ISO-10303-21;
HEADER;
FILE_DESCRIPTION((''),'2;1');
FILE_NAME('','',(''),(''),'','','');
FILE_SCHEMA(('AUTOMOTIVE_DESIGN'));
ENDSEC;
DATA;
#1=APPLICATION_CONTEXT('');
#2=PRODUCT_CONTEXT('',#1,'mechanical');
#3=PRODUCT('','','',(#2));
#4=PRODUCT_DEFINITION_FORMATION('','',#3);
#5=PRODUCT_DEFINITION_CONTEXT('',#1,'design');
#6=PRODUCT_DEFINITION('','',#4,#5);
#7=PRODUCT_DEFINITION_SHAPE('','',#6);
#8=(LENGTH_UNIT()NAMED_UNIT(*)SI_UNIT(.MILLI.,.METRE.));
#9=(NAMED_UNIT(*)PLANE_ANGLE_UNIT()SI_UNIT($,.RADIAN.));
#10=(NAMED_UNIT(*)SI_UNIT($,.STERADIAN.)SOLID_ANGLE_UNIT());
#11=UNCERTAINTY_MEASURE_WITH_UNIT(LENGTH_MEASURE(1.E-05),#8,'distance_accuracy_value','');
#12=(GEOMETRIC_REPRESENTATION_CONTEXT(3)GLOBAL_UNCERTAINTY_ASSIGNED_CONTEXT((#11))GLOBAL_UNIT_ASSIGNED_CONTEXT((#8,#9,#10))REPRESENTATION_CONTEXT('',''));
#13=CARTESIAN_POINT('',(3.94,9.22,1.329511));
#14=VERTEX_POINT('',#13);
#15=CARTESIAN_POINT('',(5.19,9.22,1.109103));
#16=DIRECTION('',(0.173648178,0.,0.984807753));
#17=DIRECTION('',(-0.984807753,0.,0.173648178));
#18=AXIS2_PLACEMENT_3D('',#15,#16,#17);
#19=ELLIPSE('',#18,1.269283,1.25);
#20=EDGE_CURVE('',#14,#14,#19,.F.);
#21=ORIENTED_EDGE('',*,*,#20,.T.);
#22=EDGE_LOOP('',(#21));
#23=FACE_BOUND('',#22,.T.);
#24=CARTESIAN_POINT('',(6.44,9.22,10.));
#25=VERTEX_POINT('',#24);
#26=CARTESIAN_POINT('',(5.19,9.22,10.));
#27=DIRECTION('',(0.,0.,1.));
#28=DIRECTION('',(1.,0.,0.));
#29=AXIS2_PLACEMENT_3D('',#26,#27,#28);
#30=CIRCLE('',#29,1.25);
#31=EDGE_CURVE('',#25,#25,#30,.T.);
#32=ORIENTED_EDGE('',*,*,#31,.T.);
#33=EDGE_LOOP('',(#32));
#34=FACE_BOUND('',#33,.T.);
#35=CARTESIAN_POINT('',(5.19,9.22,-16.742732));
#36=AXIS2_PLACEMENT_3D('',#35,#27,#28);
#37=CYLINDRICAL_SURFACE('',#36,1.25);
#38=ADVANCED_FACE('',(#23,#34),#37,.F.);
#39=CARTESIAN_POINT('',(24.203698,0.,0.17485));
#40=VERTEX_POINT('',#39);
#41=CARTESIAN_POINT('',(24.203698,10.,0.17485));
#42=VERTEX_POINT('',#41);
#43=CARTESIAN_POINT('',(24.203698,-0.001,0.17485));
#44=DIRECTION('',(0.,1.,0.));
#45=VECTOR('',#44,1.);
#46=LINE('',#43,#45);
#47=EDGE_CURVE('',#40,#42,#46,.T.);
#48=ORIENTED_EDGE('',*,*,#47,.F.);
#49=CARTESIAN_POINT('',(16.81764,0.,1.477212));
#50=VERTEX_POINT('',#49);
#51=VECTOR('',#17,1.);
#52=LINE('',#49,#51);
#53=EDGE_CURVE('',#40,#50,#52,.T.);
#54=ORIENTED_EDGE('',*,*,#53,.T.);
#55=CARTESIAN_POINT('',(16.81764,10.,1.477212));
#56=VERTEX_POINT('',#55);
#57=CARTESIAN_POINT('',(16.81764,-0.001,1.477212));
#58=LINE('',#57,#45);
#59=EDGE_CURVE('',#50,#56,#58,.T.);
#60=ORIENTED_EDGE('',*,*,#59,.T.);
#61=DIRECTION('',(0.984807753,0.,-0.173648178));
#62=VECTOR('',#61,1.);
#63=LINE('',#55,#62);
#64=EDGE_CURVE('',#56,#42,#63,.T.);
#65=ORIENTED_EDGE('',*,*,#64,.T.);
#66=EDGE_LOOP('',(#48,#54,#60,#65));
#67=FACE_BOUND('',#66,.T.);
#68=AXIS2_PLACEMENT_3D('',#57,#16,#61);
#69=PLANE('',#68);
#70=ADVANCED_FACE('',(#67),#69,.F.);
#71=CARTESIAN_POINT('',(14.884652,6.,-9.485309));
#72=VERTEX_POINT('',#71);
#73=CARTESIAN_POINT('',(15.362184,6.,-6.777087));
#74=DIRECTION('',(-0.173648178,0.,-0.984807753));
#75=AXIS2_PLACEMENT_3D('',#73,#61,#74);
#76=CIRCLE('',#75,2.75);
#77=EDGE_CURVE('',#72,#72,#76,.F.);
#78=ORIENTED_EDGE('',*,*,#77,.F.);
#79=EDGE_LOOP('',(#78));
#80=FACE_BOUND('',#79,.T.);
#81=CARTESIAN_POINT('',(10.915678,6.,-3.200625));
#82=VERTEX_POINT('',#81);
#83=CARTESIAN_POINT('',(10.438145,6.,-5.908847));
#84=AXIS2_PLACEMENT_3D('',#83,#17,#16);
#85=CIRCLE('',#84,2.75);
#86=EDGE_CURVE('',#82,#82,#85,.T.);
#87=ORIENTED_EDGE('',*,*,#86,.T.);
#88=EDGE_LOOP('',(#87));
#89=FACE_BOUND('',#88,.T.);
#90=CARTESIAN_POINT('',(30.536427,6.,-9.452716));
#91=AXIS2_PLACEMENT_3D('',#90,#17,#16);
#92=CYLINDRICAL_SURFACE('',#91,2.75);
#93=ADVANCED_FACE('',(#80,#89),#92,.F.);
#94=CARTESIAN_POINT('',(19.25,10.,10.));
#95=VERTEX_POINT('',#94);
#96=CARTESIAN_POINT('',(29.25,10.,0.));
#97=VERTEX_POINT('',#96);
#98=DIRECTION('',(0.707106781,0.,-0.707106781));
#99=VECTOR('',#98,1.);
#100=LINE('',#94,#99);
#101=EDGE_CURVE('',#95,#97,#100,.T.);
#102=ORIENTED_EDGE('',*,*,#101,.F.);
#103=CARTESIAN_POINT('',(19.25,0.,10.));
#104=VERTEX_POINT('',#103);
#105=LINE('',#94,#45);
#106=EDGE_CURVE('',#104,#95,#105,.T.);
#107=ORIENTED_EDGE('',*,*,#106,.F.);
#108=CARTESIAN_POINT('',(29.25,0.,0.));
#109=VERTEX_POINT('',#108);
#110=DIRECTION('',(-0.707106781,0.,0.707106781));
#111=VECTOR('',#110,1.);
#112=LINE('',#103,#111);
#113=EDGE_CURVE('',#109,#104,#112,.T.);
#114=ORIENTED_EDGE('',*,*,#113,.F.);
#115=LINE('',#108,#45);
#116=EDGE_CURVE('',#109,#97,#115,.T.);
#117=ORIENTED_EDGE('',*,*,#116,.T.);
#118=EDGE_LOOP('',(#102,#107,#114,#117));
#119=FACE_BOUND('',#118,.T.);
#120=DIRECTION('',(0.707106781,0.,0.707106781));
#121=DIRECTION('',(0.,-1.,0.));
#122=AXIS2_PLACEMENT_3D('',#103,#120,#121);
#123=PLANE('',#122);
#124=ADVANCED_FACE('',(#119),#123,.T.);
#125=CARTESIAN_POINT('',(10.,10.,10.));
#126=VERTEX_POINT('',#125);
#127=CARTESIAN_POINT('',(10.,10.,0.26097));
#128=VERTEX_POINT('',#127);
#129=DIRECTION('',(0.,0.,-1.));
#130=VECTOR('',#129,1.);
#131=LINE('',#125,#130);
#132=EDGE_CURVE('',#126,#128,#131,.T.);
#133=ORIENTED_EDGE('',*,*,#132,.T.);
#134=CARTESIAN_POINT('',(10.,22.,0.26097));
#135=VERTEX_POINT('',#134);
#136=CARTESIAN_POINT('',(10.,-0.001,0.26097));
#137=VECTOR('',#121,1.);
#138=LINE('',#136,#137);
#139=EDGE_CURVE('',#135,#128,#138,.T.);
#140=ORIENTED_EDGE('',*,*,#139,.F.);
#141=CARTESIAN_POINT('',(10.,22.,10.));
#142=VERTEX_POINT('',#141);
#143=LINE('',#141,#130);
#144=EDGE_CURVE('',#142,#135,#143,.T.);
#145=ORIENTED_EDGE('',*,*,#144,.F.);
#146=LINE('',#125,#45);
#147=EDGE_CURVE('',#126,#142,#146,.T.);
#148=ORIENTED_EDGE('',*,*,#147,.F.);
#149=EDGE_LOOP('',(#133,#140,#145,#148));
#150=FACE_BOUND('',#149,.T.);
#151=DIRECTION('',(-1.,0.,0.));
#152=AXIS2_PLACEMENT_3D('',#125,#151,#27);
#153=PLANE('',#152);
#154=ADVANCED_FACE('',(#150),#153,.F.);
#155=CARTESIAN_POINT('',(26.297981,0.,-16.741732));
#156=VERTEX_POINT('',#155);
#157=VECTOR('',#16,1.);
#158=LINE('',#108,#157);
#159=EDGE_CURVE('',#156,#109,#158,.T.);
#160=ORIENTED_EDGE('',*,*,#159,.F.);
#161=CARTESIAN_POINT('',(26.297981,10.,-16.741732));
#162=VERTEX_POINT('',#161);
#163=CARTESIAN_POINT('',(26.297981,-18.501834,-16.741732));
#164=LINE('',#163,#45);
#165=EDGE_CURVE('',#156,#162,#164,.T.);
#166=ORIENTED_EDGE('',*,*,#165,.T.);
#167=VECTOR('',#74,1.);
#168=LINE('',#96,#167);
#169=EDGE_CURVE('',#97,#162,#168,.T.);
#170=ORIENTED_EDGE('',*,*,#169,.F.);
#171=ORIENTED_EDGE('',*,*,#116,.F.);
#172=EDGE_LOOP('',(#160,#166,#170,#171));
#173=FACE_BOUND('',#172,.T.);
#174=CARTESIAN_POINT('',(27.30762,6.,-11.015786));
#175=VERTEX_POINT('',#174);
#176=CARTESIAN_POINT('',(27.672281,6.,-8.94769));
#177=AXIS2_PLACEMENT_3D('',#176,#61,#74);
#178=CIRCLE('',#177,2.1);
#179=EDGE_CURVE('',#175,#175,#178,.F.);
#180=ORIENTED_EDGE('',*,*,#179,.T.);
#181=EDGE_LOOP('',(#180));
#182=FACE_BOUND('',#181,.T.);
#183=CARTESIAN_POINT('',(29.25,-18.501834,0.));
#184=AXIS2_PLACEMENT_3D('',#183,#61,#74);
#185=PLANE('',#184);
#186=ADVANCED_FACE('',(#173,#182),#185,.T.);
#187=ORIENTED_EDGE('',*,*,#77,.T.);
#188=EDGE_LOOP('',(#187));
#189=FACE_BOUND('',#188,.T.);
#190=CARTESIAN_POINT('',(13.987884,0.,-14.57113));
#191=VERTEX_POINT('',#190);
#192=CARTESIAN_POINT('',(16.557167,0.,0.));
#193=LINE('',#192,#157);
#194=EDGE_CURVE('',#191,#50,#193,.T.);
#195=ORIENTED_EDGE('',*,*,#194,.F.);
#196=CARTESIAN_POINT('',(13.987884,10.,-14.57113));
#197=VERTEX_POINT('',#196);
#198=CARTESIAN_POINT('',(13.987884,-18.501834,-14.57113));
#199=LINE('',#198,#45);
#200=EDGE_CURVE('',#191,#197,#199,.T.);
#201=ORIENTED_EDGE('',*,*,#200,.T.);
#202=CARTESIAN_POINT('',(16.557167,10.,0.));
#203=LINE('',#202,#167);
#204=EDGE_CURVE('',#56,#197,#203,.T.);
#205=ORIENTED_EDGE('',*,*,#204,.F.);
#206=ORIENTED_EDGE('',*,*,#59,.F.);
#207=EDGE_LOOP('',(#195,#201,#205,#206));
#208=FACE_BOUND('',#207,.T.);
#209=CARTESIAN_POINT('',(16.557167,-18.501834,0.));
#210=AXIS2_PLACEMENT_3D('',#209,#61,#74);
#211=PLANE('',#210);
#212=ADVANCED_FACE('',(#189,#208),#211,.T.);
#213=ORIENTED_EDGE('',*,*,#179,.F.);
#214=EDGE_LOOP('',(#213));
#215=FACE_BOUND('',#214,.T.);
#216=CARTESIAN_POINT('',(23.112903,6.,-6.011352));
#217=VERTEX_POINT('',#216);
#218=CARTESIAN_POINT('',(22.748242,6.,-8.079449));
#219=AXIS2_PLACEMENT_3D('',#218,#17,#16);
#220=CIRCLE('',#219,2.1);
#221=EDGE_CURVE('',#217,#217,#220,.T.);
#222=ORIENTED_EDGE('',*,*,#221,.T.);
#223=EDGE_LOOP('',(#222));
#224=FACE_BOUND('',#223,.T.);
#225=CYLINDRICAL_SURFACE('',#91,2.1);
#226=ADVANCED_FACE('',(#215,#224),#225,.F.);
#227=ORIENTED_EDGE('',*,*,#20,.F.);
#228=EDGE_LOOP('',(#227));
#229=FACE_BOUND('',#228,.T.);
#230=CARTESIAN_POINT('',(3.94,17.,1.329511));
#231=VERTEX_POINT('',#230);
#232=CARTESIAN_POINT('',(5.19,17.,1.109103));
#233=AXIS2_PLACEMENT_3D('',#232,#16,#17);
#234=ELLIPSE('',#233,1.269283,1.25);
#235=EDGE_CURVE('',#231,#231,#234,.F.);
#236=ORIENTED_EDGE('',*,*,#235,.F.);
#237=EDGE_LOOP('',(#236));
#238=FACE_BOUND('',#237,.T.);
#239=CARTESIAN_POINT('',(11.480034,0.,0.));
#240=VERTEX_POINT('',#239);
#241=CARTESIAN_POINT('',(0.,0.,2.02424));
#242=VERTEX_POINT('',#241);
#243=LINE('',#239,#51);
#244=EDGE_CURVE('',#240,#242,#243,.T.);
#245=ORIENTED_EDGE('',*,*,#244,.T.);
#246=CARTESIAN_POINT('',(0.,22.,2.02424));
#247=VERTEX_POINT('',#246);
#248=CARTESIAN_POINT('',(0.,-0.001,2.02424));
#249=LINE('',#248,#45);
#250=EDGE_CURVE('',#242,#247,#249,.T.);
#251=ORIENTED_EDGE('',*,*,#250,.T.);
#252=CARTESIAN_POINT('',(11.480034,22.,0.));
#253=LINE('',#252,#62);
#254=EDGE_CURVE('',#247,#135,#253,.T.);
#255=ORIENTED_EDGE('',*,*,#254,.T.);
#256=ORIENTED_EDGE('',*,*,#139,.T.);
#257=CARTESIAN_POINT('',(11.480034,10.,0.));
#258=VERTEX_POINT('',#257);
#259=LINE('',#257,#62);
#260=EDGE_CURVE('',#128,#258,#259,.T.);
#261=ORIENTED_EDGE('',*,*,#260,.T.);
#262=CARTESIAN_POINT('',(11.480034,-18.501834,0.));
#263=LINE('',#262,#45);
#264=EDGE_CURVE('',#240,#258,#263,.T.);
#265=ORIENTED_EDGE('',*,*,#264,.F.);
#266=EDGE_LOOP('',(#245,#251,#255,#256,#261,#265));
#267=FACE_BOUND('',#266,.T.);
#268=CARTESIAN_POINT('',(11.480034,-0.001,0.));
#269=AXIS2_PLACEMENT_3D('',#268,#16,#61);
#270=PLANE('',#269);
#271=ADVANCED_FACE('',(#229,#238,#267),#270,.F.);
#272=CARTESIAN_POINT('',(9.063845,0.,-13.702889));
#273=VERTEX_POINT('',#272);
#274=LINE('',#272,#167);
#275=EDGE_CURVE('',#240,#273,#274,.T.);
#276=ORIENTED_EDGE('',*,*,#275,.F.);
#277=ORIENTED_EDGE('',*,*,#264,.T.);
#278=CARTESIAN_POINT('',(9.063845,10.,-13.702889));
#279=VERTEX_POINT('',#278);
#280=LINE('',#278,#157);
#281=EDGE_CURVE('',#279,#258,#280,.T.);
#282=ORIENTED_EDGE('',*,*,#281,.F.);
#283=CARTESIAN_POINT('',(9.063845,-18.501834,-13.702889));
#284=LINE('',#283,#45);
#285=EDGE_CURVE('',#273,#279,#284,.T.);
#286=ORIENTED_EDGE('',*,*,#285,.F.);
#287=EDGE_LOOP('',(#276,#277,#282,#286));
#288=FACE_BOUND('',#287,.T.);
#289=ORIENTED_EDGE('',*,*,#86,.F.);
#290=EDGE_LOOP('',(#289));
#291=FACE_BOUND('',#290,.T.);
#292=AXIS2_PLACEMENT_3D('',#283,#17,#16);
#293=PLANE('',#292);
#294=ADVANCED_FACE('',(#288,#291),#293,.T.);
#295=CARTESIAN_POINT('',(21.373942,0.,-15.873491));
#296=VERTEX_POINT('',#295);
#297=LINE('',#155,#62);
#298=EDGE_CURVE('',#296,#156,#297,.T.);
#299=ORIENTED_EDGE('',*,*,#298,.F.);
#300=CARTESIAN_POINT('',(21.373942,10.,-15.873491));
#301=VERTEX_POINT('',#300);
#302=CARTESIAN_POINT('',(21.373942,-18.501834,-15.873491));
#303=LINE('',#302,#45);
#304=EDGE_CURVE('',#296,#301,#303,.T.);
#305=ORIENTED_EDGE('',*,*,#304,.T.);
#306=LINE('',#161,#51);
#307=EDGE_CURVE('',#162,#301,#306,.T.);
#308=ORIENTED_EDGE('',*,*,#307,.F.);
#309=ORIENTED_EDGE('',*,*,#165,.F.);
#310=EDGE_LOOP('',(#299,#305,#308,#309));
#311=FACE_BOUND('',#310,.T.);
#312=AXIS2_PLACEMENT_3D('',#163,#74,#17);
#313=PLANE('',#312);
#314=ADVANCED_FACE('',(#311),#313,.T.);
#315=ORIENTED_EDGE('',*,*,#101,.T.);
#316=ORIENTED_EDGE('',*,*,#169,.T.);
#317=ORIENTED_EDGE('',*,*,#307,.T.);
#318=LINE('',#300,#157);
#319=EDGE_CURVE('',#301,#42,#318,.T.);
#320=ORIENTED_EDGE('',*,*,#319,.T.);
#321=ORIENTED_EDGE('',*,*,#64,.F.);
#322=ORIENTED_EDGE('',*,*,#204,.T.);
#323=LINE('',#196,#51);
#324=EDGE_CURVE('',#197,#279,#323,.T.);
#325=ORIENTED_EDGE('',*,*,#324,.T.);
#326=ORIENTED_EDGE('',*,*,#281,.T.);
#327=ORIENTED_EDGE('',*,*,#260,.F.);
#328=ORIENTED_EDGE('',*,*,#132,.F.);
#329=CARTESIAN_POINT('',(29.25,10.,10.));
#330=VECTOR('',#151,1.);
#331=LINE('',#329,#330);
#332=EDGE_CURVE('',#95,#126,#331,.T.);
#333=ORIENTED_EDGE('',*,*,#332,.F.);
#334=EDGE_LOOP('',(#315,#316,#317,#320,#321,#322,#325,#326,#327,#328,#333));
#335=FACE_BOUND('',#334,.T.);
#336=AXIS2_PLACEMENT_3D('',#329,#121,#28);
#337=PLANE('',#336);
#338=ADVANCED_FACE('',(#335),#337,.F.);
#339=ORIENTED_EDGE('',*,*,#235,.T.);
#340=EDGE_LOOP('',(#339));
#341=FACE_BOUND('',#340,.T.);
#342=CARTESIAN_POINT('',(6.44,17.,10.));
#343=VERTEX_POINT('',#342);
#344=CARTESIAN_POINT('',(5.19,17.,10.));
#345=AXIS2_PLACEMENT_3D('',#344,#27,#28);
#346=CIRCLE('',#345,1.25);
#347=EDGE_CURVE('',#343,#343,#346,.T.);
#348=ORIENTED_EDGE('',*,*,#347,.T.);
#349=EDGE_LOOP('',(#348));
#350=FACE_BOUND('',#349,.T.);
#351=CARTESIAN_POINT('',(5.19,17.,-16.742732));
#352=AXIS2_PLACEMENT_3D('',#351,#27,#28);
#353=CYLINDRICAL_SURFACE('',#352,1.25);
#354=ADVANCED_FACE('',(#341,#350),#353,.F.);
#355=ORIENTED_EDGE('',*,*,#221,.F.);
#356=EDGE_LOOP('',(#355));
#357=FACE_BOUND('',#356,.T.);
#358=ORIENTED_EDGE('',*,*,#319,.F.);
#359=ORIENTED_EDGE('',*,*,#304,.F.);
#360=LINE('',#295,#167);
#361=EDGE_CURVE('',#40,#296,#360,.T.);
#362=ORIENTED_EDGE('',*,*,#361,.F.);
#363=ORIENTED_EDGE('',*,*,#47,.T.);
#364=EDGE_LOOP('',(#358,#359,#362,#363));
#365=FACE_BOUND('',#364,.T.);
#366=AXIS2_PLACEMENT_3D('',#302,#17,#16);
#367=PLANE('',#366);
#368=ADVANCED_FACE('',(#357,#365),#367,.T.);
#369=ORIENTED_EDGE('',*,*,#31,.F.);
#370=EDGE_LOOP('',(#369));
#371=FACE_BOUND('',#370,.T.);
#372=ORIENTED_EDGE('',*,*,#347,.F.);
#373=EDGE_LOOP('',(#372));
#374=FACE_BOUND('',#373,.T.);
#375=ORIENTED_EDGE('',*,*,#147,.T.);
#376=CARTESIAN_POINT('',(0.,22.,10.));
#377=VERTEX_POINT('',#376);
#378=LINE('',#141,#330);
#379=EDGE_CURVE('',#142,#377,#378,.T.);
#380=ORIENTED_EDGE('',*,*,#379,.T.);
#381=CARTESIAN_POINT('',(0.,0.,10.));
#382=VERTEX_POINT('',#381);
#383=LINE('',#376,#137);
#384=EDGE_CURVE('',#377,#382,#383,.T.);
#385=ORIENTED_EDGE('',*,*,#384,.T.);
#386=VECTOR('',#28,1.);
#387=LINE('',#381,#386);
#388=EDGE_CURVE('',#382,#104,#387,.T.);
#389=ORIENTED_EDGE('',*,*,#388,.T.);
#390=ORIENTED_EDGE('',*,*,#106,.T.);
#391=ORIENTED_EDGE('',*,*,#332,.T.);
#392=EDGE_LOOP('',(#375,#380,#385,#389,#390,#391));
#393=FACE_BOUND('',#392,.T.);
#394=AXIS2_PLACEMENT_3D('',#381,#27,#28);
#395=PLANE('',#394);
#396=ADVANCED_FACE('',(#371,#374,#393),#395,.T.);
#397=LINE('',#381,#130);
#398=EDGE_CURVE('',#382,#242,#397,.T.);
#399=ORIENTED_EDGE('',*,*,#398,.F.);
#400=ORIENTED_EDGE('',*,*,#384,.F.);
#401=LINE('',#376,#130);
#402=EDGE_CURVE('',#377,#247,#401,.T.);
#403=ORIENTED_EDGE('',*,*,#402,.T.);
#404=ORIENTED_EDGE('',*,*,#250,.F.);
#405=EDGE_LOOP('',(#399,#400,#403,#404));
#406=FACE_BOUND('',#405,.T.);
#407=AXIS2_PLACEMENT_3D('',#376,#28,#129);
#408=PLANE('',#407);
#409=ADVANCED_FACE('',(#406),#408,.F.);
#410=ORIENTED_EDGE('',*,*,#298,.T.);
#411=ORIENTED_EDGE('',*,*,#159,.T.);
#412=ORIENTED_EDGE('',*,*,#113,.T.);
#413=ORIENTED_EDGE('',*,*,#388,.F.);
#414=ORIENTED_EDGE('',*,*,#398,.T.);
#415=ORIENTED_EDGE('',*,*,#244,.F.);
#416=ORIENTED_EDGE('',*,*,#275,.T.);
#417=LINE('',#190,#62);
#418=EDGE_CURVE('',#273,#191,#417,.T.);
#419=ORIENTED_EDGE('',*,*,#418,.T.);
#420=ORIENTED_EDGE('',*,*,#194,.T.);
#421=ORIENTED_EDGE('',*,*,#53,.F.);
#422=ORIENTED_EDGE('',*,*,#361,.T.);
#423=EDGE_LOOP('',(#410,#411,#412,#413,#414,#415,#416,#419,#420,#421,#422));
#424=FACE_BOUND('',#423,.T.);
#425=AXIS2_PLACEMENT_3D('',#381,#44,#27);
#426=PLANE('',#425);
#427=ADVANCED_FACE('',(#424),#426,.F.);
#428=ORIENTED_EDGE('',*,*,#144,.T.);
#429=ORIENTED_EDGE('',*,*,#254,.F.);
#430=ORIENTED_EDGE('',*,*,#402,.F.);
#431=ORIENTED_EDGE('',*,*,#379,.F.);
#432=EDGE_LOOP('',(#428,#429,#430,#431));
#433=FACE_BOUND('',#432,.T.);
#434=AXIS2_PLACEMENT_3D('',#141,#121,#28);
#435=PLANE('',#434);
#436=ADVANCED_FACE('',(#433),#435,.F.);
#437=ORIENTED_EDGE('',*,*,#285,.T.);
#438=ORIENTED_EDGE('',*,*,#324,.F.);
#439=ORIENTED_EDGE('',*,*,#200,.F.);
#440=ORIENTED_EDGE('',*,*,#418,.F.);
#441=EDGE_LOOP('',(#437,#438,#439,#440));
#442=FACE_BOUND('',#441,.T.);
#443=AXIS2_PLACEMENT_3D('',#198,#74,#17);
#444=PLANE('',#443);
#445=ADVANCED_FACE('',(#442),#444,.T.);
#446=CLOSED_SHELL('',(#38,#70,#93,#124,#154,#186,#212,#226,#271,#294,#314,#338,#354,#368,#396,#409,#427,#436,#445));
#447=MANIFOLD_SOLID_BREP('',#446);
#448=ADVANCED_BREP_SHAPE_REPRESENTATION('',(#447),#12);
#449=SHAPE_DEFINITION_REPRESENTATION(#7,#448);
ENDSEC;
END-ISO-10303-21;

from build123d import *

# Parameters (mm, degrees)
BOSS_EXTRU_1_DEPTH      = 10
BOSS_EXTRU_2_DEPTH      = 10
ENL_V_MAT_EXTRU_1_REACH = 37.775
ENL_V_MAT_EXTRU_2_REACH = 34.103
ESQUISSE4_R             = 2.75
ENL_V_MAT_EXTRU_3_REACH = 37.12
ESQUISSE5_R             = 2.1
CHANFREIN1_SIZE         = 10
ENL_V_MAT_EXTRU_4_REACH = 42.247
ENL_V_MAT_EXTRU_5_REACH = 47.329
ESQUISSE7_R             = 1.25


with BuildPart() as part:
    # Esquisse1 → Boss.-Extru.1 (new body)
    with BuildSketch(Plane.XY):
        Polygon((0, 0), (29.25, 0), (29.25, 10), (10, 10), (10, 22), (0, 22), align=None)
    extrude(amount=BOSS_EXTRU_1_DEPTH)

    # Esquisse2 → Boss.-Extru.2 (add)
    with BuildSketch(Plane(origin=(0, 10, 0), x_dir=(1, 0, 0), z_dir=(0, 1, 0))):
        Polygon((29.25, 0), (26.29798098, 16.741731801), (21.373942215, 15.873490913), (24.172866941, 0), align=None)
        Polygon((16.557167351, 0), (13.987884067, 14.57112958), (9.063845302, 13.702888692), (11.480034292, 0), align=None)
    extrude(amount=-BOSS_EXTRU_2_DEPTH)

    # Esquisse3 → Enlèv. mat.-Extru.1 (cut, up to next)
    with BuildSketch(Plane(origin=(0, 10, 0), x_dir=(1, 0, 0), z_dir=(0, 1, 0)), mode=Mode.PRIVATE) as enl_v_mat_extru_1_sk1:
        Polygon((16.557167351, 0), (16.817639618, -1.47721163), (24.203697766, -0.174850297), (24.172866941, 0), align=None)
    enl_v_mat_extru_1_tool1 = extrude(enl_v_mat_extru_1_sk1.sketch, amount=-ENL_V_MAT_EXTRU_1_REACH, mode=Mode.PRIVATE) & part.part
    add(enl_v_mat_extru_1_tool1.solids().sort_by_distance((19.452321, 10, 0.498572))[0], mode=Mode.SUBTRACT)

    # Esquisse4 → Enlèv. mat.-Extru.2 (cut, up to next)
    with BuildSketch(Plane(origin=(11.133868901, 0, -1.963201487), x_dir=(0.1736481776669311, 0, 0.9848077530122079), z_dir=(-0.9848077530122079, 0, 0.1736481776669311)), mode=Mode.PRIVATE) as enl_v_mat_extru_2_sk1:
        with Locations((-4.006512966, 6)):
            Circle(ESQUISSE4_R)
    enl_v_mat_extru_2_tool1 = extrude(enl_v_mat_extru_2_sk1.sketch, amount=-ENL_V_MAT_EXTRU_2_REACH, mode=Mode.PRIVATE) & part.part
    add(enl_v_mat_extru_2_tool1.solids().sort_by_distance((10.438145, 6, -5.908847))[0], mode=Mode.SUBTRACT)

    # Esquisse5 → Enlèv. mat.-Extru.3 (cut, up to next)
    with BuildSketch(Plane(origin=(23.443965814, 0, -4.133803708), x_dir=(0.1736481776669306, 0, 0.9848077530122081), z_dir=(-0.9848077530122081, 0, 0.1736481776669306)), mode=Mode.PRIVATE) as enl_v_mat_extru_3_sk1:
        with Locations((-4.006512966, 6)):
            Circle(ESQUISSE5_R)
    enl_v_mat_extru_3_tool1 = extrude(enl_v_mat_extru_3_sk1.sketch, amount=-ENL_V_MAT_EXTRU_3_REACH, mode=Mode.PRIVATE) & part.part
    add(enl_v_mat_extru_3_tool1.solids().sort_by_distance((22.748242, 6, -8.079449))[0], mode=Mode.SUBTRACT)

    # Chanfrein1
    chanfrein1_edges = [part.edges().sort_by_distance(p)[0] for p in [
        (29.25, 5, 10),
    ]]
    chamfer(chanfrein1_edges, length=CHANFREIN1_SIZE - 0.0001)  # a hair under: the kernel refuses the full size

    # Esquisse6 → Enlèv. mat.-Extru.4 (cut, up to next)
    with BuildSketch(Plane(origin=(0, 22, 0), x_dir=(1, 0, 0), z_dir=(0, 1, 0)), mode=Mode.PRIVATE) as enl_v_mat_extru_4_sk1:
        Polygon((0, 0), (11.480034292, 0), (0, -2.024239785), align=None)
    enl_v_mat_extru_4_tool1 = extrude(enl_v_mat_extru_4_sk1.sketch, amount=-ENL_V_MAT_EXTRU_4_REACH, mode=Mode.PRIVATE) & part.part
    add(enl_v_mat_extru_4_tool1.solids().sort_by_distance((3.826678, 22, 0.674747))[0], mode=Mode.SUBTRACT)

    # Enlèv. mat.-Extru.5: up to this plane
    enl_v_mat_extru_5_end = Plane(origin=(11.480034292, -0.001, 0), z_dir=(0.1736481776669316, 0, 0.9848077530122079))
    # Esquisse7 → Enlèv. mat.-Extru.5 (cut, up to the surface)
    with BuildSketch(Plane.XY.offset(10), mode=Mode.PRIVATE) as enl_v_mat_extru_5_sk1:
        with Locations((5.19, 17)):
            Circle(ESQUISSE7_R)
    enl_v_mat_extru_5_tool1 = split(extrude(enl_v_mat_extru_5_sk1.sketch, amount=-ENL_V_MAT_EXTRU_5_REACH, mode=Mode.PRIVATE), bisect_by=enl_v_mat_extru_5_end, keep=Keep.BOTH, mode=Mode.PRIVATE)
    add(enl_v_mat_extru_5_tool1.solids().sort_by_distance((5.19, 17, 10))[0], mode=Mode.SUBTRACT)
    # Esquisse7 → Enlèv. mat.-Extru.5 (cut, up to the surface)
    with BuildSketch(Plane.XY.offset(10), mode=Mode.PRIVATE) as enl_v_mat_extru_5_sk2:
        with Locations((5.19, 9.22)):
            Circle(ESQUISSE7_R)
    enl_v_mat_extru_5_tool2 = split(extrude(enl_v_mat_extru_5_sk2.sketch, amount=-ENL_V_MAT_EXTRU_5_REACH, mode=Mode.PRIVATE), bisect_by=enl_v_mat_extru_5_end, keep=Keep.BOTH, mode=Mode.PRIVATE)
    add(enl_v_mat_extru_5_tool2.solids().sort_by_distance((5.19, 9.22, 10))[0], mode=Mode.SUBTRACT)


solid = part.part
